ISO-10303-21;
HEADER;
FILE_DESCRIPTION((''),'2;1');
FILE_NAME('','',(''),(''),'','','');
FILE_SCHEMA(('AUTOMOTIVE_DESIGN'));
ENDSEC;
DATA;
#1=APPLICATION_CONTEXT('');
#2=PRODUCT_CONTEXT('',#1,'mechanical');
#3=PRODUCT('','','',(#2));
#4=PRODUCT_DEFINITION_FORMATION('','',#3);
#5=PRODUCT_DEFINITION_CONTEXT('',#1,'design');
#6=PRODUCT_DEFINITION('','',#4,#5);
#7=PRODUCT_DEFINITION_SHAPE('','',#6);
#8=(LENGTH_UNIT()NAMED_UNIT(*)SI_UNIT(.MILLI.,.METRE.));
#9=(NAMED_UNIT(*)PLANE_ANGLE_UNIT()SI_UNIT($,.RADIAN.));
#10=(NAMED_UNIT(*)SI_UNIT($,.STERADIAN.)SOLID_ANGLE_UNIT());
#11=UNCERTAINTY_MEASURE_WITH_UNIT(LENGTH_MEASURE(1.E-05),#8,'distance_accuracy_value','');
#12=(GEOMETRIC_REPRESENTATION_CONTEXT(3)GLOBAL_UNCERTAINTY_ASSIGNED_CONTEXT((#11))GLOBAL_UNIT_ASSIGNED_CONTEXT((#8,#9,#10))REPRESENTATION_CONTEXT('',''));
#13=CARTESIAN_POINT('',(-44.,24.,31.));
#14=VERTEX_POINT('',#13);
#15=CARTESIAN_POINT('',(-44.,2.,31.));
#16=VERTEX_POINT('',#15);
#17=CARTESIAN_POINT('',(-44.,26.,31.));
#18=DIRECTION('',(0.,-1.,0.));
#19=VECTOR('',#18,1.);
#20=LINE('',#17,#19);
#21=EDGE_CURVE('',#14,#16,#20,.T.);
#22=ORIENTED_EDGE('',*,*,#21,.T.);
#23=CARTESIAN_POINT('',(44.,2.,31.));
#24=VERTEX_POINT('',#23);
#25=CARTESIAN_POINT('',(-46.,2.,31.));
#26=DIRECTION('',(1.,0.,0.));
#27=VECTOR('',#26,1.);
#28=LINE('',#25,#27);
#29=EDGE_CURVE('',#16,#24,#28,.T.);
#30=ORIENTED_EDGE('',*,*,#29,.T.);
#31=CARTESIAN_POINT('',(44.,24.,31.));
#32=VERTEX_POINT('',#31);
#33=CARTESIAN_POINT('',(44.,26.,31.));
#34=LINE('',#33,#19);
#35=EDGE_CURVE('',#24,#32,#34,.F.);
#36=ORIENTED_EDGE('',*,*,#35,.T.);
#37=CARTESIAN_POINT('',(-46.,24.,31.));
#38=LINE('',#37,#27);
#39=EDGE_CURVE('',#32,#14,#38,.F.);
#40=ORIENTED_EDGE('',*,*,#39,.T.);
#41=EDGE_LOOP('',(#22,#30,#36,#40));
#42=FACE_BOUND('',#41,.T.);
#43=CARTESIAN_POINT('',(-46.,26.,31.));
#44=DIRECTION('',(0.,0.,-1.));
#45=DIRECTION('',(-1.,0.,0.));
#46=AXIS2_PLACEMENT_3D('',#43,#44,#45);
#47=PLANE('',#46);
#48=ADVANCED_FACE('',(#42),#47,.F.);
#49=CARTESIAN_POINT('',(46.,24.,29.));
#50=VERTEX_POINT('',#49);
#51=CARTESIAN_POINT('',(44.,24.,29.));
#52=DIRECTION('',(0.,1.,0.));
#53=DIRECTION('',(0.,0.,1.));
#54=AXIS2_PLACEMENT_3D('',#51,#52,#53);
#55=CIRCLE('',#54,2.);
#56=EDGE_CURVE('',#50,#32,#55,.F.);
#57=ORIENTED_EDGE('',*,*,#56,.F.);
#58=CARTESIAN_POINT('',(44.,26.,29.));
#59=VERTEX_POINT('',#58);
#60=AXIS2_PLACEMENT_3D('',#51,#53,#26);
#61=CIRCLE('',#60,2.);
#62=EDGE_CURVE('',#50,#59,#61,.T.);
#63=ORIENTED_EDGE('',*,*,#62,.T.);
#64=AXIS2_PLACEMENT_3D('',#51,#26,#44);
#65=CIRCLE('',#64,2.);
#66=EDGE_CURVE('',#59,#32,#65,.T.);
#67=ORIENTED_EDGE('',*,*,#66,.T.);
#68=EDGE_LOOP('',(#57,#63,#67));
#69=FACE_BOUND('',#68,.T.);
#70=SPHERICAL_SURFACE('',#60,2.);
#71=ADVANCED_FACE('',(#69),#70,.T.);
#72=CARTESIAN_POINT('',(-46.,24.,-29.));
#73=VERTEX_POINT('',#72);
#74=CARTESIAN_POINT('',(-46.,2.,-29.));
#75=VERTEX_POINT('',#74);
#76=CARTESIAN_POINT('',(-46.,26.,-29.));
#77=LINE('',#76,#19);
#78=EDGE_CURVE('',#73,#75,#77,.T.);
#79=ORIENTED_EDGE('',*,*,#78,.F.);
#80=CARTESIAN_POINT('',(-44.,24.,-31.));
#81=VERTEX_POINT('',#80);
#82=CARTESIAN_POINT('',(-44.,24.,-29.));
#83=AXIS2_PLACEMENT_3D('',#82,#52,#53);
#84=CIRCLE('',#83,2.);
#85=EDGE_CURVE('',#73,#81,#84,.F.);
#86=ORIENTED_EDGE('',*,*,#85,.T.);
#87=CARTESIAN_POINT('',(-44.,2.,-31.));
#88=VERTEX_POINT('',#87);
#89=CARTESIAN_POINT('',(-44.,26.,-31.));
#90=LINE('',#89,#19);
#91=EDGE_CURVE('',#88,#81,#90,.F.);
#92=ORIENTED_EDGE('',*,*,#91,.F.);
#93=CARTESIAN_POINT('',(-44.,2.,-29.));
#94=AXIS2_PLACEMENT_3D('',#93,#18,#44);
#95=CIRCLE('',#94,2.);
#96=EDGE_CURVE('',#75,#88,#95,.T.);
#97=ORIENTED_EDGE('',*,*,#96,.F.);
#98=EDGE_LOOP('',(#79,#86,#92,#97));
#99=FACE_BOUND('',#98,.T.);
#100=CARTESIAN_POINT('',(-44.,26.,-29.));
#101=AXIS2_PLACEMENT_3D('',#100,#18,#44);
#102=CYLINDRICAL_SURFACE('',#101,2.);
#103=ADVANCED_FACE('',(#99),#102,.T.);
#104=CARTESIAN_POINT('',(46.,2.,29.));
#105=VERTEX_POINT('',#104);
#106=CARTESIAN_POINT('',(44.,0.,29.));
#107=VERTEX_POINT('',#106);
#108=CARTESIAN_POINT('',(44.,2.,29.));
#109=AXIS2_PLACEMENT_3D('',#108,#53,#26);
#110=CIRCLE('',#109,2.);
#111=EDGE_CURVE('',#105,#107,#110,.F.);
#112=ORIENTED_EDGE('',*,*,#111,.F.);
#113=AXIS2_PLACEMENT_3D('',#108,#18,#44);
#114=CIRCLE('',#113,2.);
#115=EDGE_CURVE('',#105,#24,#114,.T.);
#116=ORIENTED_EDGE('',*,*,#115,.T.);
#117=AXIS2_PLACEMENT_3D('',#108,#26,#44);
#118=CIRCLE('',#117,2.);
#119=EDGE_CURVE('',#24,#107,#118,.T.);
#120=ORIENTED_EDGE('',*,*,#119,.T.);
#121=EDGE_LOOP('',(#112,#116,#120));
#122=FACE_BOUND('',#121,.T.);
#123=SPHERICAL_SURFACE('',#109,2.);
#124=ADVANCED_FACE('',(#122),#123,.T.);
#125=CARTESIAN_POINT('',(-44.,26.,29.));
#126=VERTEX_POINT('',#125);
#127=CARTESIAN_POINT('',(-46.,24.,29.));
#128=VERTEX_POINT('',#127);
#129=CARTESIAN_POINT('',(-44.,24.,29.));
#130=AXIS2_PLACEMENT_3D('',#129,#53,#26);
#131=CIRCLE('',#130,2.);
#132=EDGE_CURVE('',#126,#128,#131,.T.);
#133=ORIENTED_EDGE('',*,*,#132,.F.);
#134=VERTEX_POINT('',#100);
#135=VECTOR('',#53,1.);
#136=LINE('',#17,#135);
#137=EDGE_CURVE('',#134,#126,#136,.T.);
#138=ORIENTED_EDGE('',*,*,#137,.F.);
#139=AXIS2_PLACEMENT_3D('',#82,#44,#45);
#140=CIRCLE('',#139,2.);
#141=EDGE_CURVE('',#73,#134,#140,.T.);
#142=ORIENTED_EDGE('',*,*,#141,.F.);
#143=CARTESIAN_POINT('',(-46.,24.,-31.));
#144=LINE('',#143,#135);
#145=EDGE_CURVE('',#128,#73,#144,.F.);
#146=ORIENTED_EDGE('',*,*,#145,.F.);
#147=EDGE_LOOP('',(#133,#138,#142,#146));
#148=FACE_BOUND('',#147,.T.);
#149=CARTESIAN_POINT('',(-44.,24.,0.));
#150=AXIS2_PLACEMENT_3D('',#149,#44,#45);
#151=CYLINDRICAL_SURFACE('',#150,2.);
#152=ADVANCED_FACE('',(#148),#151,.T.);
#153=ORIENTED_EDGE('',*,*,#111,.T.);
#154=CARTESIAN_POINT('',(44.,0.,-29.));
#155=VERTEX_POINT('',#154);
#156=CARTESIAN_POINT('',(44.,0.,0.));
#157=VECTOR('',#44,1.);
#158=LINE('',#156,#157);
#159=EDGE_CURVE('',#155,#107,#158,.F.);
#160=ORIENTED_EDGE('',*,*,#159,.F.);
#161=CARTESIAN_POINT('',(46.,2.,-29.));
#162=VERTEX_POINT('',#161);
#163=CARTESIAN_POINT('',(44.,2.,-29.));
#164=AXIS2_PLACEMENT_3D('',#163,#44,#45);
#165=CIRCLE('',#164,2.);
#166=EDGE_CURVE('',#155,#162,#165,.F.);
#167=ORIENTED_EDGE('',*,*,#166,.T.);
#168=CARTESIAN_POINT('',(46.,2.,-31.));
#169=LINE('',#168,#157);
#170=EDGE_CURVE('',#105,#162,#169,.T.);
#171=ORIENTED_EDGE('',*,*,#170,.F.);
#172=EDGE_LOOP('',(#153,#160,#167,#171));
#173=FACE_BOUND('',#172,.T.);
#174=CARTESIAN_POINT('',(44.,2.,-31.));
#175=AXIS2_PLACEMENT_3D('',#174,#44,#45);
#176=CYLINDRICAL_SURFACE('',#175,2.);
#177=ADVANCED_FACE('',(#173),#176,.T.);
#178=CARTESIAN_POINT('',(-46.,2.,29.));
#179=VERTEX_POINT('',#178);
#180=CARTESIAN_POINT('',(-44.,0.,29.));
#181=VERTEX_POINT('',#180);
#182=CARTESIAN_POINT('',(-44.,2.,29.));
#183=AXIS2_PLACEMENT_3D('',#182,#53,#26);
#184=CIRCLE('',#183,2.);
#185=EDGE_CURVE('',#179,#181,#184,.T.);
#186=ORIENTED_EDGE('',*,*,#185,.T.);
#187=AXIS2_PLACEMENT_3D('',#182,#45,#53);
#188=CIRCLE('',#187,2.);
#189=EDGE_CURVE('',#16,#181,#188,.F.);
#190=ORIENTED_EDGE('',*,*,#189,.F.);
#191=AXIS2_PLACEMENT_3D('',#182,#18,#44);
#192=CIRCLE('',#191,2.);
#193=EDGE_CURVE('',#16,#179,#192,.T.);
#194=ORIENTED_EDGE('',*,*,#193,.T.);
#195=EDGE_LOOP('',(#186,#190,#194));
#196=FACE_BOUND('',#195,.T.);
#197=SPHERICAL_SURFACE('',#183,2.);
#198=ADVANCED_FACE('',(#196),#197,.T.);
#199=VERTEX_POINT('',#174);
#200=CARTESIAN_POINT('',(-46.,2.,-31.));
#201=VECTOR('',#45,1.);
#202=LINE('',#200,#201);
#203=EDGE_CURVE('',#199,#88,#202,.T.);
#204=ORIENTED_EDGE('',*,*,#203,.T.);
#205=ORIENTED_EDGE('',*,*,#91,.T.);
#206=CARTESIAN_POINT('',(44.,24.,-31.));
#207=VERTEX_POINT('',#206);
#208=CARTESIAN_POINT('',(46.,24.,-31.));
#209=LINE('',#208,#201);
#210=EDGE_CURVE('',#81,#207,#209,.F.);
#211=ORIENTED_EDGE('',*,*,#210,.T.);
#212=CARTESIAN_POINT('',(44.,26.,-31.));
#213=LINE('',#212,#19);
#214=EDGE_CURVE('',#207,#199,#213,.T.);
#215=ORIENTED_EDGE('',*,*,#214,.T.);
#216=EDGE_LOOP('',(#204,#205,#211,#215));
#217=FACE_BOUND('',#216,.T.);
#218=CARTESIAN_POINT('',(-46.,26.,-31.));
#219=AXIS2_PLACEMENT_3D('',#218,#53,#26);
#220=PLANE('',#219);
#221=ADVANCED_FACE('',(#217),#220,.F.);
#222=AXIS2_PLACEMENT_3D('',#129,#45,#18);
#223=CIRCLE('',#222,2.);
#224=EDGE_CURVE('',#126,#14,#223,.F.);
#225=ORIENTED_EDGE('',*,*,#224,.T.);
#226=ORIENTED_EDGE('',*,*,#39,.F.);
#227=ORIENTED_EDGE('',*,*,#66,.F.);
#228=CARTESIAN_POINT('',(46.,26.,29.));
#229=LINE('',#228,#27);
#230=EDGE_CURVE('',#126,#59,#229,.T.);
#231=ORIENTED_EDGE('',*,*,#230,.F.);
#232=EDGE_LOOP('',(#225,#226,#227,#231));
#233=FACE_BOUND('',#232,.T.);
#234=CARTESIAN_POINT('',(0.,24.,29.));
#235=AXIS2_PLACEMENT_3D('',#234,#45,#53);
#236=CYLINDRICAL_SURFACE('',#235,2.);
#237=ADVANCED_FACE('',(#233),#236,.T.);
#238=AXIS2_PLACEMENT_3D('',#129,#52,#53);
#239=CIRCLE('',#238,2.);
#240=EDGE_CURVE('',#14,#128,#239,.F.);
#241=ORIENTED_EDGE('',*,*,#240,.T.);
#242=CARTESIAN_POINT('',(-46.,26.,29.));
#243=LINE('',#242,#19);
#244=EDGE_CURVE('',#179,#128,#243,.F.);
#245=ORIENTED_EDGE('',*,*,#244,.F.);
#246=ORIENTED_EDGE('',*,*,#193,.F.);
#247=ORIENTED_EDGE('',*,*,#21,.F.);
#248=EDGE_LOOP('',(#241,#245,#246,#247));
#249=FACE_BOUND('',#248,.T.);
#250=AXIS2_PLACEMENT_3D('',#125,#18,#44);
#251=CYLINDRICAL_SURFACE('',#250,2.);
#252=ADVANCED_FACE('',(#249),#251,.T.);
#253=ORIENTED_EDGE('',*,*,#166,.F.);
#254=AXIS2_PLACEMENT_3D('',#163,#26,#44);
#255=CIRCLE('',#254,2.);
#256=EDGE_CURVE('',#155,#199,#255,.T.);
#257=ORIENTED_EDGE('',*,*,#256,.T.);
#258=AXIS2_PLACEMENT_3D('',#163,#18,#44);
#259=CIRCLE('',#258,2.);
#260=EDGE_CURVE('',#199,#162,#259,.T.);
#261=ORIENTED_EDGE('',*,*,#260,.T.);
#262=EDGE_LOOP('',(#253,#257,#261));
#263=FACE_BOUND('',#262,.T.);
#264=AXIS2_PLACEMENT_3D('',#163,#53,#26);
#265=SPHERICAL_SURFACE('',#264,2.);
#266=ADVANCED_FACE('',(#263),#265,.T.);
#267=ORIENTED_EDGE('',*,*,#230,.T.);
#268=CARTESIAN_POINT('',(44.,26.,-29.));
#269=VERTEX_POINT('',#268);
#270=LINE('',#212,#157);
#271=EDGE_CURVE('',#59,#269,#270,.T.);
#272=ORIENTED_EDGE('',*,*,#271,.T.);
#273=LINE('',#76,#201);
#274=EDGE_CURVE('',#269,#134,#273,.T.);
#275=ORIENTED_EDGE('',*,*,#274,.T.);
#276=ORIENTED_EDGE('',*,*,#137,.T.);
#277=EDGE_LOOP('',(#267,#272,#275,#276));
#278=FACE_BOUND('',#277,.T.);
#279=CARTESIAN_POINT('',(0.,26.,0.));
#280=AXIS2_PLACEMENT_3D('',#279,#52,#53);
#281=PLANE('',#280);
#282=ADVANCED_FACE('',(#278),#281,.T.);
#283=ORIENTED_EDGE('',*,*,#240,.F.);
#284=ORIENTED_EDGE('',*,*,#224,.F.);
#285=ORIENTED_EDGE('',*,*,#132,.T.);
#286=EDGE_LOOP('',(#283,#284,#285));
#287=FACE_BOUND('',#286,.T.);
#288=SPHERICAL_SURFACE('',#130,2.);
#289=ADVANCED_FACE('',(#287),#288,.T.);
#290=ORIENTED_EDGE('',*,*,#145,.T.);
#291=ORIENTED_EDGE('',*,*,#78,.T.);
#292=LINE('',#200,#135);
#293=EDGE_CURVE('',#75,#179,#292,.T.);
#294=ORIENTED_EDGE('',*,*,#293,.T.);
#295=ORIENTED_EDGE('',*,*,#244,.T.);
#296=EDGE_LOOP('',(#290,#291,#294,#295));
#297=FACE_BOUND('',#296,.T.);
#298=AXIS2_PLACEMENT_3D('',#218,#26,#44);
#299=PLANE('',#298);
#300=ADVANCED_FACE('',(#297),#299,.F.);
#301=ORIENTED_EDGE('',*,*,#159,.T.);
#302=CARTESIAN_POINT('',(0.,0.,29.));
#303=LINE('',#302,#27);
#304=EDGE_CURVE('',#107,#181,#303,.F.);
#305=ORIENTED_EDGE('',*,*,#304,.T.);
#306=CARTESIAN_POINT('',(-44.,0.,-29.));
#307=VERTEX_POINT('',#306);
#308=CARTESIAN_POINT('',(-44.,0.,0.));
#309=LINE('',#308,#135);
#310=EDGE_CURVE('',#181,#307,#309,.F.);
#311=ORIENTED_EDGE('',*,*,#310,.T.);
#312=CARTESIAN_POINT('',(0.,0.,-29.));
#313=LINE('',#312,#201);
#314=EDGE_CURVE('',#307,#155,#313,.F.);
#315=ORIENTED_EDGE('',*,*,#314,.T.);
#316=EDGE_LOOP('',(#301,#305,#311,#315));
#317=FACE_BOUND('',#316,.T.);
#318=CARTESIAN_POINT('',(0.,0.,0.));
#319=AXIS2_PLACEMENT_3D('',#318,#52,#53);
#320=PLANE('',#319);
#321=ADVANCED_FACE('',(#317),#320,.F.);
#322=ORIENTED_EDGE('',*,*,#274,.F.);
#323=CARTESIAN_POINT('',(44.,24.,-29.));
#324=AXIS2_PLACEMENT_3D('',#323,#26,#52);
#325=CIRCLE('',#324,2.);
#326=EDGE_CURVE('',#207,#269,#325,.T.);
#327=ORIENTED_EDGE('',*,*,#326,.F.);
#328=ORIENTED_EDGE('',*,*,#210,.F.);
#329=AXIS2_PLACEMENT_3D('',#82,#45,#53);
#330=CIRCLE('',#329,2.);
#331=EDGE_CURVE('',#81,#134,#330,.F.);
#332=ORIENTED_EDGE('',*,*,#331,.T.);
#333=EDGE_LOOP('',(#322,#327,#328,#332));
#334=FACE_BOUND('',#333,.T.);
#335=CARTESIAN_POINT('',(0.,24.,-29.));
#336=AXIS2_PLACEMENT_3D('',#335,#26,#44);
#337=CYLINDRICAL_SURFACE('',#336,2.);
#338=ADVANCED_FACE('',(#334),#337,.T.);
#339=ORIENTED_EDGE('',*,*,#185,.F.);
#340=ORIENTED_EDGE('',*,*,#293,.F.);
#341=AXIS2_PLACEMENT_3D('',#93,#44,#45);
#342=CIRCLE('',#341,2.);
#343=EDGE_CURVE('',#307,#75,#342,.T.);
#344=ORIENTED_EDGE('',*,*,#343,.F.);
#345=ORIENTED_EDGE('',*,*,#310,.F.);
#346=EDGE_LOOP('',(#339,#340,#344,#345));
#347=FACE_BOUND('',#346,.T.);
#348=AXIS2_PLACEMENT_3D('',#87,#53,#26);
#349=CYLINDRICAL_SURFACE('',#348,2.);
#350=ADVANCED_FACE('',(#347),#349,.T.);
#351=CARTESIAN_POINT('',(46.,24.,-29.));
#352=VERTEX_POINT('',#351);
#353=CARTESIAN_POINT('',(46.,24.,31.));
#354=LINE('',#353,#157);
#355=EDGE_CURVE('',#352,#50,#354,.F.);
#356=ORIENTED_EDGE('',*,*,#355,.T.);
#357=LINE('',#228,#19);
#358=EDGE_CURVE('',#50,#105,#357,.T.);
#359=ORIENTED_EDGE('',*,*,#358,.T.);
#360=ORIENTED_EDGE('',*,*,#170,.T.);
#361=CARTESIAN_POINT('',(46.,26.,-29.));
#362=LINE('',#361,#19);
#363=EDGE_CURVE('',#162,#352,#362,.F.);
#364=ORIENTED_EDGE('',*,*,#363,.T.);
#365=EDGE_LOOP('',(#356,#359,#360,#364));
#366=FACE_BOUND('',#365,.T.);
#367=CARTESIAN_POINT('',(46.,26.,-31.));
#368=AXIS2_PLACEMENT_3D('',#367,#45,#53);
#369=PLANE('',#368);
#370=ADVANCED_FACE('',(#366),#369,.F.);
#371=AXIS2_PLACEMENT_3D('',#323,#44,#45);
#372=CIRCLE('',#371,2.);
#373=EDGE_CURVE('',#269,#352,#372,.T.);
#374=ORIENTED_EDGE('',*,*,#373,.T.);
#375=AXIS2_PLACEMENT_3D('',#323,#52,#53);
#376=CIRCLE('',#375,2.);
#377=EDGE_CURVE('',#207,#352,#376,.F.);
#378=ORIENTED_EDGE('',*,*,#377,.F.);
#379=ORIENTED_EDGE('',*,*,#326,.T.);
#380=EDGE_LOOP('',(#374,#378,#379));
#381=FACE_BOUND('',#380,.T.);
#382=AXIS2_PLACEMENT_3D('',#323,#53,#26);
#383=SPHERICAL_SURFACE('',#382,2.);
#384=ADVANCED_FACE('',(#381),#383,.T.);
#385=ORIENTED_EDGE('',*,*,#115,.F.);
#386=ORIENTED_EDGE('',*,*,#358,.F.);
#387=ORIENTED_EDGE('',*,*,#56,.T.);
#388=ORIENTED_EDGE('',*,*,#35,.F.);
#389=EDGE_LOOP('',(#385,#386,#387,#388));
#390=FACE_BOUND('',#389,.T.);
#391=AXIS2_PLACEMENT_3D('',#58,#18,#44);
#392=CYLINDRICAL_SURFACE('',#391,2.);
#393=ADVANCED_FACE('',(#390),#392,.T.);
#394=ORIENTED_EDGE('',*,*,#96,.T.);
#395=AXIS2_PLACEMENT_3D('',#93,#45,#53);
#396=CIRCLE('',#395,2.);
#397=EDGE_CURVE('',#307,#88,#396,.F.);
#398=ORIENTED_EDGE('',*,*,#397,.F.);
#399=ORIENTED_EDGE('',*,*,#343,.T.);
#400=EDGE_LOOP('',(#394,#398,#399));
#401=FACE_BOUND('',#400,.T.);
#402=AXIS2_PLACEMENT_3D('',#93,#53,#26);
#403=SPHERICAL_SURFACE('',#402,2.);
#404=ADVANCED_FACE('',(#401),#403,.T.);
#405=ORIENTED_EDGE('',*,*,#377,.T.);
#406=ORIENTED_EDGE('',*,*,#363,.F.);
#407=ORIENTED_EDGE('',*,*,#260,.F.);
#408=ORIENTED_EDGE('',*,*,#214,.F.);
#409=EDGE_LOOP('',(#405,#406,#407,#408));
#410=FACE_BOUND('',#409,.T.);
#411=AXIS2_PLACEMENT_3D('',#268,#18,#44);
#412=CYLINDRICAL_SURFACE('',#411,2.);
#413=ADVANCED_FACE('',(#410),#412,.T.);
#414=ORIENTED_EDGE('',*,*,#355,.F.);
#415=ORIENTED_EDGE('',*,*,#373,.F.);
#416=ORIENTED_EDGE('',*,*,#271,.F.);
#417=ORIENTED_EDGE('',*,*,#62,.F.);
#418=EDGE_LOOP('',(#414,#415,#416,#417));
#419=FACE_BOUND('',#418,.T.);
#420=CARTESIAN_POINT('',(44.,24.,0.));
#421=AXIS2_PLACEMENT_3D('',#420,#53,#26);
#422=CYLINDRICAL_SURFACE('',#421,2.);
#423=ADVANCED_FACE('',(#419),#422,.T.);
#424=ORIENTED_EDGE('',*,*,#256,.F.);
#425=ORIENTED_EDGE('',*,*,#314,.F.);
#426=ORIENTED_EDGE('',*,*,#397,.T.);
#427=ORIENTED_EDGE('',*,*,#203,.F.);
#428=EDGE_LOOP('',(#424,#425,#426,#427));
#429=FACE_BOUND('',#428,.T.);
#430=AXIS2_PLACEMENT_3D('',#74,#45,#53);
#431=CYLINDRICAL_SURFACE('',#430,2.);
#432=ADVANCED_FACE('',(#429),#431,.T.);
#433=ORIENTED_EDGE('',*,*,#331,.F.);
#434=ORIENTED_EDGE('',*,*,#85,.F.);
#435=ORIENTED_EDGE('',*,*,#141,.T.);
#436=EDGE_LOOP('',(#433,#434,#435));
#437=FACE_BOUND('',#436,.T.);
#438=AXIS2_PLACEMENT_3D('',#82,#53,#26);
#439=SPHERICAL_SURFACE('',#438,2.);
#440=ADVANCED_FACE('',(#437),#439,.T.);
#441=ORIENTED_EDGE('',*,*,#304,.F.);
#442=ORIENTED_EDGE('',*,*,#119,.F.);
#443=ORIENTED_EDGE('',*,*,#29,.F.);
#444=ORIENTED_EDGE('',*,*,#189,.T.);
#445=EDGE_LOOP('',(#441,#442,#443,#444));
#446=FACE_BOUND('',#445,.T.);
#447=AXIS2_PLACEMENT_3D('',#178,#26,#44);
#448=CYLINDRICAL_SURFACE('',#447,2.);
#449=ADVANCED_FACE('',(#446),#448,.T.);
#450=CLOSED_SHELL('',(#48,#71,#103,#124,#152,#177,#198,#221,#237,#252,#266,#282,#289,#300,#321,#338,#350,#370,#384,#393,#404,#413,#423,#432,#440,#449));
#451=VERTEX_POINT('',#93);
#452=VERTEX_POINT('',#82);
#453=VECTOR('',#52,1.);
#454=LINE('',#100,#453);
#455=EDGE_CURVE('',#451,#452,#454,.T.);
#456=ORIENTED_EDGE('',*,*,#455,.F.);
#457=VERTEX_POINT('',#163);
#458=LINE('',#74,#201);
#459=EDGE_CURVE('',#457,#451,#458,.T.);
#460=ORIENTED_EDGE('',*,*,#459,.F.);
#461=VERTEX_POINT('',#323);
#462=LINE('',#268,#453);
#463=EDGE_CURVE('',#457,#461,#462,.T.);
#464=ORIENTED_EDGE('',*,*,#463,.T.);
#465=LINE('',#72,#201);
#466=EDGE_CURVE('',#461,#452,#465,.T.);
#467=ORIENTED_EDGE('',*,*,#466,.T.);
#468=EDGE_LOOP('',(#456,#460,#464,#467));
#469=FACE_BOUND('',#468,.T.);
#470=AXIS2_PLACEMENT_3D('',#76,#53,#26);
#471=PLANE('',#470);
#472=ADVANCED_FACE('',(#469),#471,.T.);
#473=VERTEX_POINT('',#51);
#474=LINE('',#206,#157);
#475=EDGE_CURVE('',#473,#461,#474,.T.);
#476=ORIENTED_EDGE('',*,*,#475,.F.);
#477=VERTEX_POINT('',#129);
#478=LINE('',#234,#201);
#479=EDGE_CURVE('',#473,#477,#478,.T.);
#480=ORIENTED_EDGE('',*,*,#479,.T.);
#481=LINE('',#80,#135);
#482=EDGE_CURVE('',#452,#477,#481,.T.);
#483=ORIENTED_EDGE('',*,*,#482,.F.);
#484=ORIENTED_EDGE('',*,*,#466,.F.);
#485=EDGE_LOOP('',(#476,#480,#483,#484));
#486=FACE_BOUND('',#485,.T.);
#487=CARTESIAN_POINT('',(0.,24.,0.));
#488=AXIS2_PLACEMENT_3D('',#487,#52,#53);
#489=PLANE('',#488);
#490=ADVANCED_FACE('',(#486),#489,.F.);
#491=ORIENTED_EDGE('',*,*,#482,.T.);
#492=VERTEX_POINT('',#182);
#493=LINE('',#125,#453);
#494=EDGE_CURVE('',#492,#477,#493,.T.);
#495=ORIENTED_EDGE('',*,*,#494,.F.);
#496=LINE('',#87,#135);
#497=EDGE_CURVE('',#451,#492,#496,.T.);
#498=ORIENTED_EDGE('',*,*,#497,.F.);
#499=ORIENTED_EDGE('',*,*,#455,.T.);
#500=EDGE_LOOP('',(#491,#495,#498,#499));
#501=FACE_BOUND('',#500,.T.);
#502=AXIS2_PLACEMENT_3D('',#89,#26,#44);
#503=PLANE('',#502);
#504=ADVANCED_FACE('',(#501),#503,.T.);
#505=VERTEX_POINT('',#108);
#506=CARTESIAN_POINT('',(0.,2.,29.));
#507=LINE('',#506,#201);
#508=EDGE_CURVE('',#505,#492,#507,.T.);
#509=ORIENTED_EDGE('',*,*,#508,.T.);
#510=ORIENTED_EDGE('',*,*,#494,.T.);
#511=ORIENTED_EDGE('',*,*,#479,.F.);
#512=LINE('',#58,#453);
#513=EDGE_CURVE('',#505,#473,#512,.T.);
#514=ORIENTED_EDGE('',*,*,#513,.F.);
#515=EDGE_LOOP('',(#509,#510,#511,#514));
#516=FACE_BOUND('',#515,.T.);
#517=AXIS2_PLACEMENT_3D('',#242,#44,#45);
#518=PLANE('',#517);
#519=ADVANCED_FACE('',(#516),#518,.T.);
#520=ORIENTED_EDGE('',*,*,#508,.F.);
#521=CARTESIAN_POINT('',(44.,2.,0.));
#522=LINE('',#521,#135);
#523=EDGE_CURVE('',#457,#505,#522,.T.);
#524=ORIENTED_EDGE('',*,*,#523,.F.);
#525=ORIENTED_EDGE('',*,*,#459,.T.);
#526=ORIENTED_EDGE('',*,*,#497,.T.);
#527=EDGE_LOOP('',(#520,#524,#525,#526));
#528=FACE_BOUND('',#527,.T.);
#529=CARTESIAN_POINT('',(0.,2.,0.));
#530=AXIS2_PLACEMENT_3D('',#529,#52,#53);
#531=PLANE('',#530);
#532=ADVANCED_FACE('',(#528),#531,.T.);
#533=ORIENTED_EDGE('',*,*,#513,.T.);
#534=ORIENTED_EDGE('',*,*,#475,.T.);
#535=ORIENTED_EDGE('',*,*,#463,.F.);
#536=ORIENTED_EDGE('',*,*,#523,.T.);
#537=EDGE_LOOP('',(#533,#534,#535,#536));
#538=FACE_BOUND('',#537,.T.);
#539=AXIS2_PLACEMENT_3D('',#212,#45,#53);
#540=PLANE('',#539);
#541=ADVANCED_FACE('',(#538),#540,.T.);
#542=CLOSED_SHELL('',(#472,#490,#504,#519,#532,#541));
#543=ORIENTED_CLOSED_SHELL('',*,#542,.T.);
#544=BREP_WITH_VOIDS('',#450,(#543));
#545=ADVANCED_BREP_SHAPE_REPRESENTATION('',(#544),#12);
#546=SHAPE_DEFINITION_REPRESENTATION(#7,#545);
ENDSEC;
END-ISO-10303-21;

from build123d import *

# Parameters (mm, degrees)
ESBO_O1_W                = 92
ESBO_O1_H                = 62
RESSALTO_EXTRUS_O1_DEPTH = 26
FILETE1_R                = 2
CASCA2_START             = -44
CASCA2_OUTLINE_W         = 22
CASCA2_OUTLINE_H         = 58
CASCA2_DEPTH             = 88


# Read off the part's stored shape, not the designer's step: Casca2
with BuildPart() as part:
    # Esboço1 → Ressalto-extrusão1 (new body)
    with BuildSketch(Plane(origin=(0, 0, 0), x_dir=(1, 0, 0), z_dir=(0, 1, 0))):
        Rectangle(ESBO_O1_W, ESBO_O1_H)
    extrude(amount=RESSALTO_EXTRUS_O1_DEPTH)

    # Filete1
    filete1_edges = [part.edges().sort_by_distance(p)[0] for p in [
        (-46, 26, 0),
        (0, 26, 31),
        (46, 26, 0),
        (0, 0, 31),
        (-46, 0, 0),
        (0, 0, -31),
        (46, 0, 0),
        (0, 26, -31),
        (46, 13, 31),
        (-46, 13, 31),
        (-46, 13, -31),
        (46, 13, -31),
    ]]
    fillet(filete1_edges, radius=FILETE1_R)

    # Casca2 outline → Casca2 (cut)
    with BuildSketch(Plane.YZ.offset(CASCA2_START)):
        with Locations((13, 0)):
            Rectangle(CASCA2_OUTLINE_W, CASCA2_OUTLINE_H)
    extrude(amount=CASCA2_DEPTH, mode=Mode.SUBTRACT)


solid = part.part
